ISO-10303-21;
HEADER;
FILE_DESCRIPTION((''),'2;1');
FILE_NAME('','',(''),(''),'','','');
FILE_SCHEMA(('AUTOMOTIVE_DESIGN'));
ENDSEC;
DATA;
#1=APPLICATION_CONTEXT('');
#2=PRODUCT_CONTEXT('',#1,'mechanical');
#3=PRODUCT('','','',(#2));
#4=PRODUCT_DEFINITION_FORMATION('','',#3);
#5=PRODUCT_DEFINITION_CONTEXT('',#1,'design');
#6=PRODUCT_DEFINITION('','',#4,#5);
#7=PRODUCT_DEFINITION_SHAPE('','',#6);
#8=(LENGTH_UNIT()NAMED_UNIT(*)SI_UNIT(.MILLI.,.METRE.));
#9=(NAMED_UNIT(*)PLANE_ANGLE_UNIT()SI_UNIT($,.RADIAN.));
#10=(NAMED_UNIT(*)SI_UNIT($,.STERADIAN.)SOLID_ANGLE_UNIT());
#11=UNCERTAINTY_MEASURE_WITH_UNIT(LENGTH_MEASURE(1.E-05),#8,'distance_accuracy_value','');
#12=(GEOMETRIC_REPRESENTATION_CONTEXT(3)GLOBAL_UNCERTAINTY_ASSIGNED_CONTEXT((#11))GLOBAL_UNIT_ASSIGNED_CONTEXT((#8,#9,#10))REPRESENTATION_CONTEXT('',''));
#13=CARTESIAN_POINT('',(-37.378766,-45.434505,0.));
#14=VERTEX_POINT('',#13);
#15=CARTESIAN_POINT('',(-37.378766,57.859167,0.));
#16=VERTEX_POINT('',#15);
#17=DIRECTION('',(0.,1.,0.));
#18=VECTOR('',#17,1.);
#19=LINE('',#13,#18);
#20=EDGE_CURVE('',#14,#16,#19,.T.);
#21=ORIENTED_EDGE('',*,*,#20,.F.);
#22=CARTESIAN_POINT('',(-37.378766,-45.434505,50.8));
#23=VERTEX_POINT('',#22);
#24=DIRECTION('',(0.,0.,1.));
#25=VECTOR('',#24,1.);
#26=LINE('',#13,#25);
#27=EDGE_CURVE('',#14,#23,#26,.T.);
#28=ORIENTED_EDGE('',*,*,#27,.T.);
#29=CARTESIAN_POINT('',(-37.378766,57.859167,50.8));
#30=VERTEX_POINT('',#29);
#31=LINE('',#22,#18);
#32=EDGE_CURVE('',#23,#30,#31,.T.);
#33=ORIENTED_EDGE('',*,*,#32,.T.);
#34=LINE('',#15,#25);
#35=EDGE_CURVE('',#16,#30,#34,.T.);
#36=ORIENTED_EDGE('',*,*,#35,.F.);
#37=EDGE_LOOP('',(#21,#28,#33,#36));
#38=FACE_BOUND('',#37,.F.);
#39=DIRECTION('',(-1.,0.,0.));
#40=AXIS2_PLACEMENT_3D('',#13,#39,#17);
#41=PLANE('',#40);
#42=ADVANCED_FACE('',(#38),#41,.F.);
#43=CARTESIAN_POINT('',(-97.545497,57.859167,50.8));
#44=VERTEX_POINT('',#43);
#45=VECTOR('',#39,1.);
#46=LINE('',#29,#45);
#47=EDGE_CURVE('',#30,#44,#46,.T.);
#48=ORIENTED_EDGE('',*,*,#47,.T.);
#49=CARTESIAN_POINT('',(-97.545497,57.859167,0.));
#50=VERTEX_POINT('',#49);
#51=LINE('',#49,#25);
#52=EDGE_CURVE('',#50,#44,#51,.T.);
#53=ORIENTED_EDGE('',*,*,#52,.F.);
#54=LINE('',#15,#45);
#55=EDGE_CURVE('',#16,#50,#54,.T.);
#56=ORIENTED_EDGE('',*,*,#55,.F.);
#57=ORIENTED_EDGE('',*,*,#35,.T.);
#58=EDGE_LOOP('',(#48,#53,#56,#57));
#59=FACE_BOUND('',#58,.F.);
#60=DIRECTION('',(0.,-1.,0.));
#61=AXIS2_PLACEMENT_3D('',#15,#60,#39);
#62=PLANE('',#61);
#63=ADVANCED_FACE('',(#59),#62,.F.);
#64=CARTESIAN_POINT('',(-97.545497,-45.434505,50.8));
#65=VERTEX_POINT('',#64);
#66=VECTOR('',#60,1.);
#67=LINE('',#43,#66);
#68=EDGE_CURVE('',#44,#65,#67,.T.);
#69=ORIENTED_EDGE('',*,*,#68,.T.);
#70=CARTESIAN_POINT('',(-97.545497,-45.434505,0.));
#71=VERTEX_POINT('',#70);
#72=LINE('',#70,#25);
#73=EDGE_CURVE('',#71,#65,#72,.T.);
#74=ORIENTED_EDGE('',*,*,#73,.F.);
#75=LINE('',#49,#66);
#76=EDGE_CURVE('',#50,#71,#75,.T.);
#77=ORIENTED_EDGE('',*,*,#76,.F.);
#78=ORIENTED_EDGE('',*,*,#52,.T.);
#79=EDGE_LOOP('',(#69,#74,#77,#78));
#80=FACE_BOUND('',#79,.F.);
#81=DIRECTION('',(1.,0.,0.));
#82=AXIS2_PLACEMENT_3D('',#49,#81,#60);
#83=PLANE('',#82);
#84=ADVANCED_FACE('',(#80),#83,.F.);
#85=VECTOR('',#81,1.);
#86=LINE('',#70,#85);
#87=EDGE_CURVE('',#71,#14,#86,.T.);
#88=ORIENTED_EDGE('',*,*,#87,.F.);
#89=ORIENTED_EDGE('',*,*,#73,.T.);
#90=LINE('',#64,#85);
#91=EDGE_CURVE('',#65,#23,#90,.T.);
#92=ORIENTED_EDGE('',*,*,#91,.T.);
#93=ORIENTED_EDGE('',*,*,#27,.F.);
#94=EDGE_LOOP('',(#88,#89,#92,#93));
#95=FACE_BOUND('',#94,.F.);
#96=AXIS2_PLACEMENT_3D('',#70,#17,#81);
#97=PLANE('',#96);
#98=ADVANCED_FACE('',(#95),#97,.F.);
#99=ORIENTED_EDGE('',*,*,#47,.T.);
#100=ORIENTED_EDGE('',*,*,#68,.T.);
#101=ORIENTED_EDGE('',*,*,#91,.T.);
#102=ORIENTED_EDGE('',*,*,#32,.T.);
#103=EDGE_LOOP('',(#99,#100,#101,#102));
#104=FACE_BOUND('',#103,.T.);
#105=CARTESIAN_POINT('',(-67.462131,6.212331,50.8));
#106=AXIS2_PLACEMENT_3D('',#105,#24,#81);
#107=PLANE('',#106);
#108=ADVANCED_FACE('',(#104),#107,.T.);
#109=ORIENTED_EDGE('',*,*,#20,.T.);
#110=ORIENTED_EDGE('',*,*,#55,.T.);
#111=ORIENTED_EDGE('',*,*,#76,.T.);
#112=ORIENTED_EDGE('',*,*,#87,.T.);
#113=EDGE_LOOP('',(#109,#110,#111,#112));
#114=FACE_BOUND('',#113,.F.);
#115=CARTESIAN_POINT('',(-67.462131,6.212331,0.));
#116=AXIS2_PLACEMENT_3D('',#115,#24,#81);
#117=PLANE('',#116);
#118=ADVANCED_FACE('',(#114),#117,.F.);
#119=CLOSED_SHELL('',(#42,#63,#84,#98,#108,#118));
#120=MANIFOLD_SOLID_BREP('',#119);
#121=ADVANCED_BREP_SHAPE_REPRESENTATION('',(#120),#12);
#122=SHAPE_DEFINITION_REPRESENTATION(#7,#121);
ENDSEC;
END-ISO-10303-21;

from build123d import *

# Parameters (mm, degrees)
F1_DEPTH = 50.8


# Not quite as in the source:
# - the program builds the solid bodies; features that only make, move or delete a surface that nothing else refers to are left out


with BuildPart() as f1:
    # F0 (on Top) → F1 (new body)
    with BuildSketch(Plane.XY):
        Polygon((-37.3787656426, 57.8591674566), (-97.5454971194, 57.8591674566), (-97.5454971194, -45.4345047474), (-37.3787656426, -45.4345047474), (-37.3787656426, 41.2358790636), align=None)
    extrude(amount=F1_DEPTH)


solid = f1.part
